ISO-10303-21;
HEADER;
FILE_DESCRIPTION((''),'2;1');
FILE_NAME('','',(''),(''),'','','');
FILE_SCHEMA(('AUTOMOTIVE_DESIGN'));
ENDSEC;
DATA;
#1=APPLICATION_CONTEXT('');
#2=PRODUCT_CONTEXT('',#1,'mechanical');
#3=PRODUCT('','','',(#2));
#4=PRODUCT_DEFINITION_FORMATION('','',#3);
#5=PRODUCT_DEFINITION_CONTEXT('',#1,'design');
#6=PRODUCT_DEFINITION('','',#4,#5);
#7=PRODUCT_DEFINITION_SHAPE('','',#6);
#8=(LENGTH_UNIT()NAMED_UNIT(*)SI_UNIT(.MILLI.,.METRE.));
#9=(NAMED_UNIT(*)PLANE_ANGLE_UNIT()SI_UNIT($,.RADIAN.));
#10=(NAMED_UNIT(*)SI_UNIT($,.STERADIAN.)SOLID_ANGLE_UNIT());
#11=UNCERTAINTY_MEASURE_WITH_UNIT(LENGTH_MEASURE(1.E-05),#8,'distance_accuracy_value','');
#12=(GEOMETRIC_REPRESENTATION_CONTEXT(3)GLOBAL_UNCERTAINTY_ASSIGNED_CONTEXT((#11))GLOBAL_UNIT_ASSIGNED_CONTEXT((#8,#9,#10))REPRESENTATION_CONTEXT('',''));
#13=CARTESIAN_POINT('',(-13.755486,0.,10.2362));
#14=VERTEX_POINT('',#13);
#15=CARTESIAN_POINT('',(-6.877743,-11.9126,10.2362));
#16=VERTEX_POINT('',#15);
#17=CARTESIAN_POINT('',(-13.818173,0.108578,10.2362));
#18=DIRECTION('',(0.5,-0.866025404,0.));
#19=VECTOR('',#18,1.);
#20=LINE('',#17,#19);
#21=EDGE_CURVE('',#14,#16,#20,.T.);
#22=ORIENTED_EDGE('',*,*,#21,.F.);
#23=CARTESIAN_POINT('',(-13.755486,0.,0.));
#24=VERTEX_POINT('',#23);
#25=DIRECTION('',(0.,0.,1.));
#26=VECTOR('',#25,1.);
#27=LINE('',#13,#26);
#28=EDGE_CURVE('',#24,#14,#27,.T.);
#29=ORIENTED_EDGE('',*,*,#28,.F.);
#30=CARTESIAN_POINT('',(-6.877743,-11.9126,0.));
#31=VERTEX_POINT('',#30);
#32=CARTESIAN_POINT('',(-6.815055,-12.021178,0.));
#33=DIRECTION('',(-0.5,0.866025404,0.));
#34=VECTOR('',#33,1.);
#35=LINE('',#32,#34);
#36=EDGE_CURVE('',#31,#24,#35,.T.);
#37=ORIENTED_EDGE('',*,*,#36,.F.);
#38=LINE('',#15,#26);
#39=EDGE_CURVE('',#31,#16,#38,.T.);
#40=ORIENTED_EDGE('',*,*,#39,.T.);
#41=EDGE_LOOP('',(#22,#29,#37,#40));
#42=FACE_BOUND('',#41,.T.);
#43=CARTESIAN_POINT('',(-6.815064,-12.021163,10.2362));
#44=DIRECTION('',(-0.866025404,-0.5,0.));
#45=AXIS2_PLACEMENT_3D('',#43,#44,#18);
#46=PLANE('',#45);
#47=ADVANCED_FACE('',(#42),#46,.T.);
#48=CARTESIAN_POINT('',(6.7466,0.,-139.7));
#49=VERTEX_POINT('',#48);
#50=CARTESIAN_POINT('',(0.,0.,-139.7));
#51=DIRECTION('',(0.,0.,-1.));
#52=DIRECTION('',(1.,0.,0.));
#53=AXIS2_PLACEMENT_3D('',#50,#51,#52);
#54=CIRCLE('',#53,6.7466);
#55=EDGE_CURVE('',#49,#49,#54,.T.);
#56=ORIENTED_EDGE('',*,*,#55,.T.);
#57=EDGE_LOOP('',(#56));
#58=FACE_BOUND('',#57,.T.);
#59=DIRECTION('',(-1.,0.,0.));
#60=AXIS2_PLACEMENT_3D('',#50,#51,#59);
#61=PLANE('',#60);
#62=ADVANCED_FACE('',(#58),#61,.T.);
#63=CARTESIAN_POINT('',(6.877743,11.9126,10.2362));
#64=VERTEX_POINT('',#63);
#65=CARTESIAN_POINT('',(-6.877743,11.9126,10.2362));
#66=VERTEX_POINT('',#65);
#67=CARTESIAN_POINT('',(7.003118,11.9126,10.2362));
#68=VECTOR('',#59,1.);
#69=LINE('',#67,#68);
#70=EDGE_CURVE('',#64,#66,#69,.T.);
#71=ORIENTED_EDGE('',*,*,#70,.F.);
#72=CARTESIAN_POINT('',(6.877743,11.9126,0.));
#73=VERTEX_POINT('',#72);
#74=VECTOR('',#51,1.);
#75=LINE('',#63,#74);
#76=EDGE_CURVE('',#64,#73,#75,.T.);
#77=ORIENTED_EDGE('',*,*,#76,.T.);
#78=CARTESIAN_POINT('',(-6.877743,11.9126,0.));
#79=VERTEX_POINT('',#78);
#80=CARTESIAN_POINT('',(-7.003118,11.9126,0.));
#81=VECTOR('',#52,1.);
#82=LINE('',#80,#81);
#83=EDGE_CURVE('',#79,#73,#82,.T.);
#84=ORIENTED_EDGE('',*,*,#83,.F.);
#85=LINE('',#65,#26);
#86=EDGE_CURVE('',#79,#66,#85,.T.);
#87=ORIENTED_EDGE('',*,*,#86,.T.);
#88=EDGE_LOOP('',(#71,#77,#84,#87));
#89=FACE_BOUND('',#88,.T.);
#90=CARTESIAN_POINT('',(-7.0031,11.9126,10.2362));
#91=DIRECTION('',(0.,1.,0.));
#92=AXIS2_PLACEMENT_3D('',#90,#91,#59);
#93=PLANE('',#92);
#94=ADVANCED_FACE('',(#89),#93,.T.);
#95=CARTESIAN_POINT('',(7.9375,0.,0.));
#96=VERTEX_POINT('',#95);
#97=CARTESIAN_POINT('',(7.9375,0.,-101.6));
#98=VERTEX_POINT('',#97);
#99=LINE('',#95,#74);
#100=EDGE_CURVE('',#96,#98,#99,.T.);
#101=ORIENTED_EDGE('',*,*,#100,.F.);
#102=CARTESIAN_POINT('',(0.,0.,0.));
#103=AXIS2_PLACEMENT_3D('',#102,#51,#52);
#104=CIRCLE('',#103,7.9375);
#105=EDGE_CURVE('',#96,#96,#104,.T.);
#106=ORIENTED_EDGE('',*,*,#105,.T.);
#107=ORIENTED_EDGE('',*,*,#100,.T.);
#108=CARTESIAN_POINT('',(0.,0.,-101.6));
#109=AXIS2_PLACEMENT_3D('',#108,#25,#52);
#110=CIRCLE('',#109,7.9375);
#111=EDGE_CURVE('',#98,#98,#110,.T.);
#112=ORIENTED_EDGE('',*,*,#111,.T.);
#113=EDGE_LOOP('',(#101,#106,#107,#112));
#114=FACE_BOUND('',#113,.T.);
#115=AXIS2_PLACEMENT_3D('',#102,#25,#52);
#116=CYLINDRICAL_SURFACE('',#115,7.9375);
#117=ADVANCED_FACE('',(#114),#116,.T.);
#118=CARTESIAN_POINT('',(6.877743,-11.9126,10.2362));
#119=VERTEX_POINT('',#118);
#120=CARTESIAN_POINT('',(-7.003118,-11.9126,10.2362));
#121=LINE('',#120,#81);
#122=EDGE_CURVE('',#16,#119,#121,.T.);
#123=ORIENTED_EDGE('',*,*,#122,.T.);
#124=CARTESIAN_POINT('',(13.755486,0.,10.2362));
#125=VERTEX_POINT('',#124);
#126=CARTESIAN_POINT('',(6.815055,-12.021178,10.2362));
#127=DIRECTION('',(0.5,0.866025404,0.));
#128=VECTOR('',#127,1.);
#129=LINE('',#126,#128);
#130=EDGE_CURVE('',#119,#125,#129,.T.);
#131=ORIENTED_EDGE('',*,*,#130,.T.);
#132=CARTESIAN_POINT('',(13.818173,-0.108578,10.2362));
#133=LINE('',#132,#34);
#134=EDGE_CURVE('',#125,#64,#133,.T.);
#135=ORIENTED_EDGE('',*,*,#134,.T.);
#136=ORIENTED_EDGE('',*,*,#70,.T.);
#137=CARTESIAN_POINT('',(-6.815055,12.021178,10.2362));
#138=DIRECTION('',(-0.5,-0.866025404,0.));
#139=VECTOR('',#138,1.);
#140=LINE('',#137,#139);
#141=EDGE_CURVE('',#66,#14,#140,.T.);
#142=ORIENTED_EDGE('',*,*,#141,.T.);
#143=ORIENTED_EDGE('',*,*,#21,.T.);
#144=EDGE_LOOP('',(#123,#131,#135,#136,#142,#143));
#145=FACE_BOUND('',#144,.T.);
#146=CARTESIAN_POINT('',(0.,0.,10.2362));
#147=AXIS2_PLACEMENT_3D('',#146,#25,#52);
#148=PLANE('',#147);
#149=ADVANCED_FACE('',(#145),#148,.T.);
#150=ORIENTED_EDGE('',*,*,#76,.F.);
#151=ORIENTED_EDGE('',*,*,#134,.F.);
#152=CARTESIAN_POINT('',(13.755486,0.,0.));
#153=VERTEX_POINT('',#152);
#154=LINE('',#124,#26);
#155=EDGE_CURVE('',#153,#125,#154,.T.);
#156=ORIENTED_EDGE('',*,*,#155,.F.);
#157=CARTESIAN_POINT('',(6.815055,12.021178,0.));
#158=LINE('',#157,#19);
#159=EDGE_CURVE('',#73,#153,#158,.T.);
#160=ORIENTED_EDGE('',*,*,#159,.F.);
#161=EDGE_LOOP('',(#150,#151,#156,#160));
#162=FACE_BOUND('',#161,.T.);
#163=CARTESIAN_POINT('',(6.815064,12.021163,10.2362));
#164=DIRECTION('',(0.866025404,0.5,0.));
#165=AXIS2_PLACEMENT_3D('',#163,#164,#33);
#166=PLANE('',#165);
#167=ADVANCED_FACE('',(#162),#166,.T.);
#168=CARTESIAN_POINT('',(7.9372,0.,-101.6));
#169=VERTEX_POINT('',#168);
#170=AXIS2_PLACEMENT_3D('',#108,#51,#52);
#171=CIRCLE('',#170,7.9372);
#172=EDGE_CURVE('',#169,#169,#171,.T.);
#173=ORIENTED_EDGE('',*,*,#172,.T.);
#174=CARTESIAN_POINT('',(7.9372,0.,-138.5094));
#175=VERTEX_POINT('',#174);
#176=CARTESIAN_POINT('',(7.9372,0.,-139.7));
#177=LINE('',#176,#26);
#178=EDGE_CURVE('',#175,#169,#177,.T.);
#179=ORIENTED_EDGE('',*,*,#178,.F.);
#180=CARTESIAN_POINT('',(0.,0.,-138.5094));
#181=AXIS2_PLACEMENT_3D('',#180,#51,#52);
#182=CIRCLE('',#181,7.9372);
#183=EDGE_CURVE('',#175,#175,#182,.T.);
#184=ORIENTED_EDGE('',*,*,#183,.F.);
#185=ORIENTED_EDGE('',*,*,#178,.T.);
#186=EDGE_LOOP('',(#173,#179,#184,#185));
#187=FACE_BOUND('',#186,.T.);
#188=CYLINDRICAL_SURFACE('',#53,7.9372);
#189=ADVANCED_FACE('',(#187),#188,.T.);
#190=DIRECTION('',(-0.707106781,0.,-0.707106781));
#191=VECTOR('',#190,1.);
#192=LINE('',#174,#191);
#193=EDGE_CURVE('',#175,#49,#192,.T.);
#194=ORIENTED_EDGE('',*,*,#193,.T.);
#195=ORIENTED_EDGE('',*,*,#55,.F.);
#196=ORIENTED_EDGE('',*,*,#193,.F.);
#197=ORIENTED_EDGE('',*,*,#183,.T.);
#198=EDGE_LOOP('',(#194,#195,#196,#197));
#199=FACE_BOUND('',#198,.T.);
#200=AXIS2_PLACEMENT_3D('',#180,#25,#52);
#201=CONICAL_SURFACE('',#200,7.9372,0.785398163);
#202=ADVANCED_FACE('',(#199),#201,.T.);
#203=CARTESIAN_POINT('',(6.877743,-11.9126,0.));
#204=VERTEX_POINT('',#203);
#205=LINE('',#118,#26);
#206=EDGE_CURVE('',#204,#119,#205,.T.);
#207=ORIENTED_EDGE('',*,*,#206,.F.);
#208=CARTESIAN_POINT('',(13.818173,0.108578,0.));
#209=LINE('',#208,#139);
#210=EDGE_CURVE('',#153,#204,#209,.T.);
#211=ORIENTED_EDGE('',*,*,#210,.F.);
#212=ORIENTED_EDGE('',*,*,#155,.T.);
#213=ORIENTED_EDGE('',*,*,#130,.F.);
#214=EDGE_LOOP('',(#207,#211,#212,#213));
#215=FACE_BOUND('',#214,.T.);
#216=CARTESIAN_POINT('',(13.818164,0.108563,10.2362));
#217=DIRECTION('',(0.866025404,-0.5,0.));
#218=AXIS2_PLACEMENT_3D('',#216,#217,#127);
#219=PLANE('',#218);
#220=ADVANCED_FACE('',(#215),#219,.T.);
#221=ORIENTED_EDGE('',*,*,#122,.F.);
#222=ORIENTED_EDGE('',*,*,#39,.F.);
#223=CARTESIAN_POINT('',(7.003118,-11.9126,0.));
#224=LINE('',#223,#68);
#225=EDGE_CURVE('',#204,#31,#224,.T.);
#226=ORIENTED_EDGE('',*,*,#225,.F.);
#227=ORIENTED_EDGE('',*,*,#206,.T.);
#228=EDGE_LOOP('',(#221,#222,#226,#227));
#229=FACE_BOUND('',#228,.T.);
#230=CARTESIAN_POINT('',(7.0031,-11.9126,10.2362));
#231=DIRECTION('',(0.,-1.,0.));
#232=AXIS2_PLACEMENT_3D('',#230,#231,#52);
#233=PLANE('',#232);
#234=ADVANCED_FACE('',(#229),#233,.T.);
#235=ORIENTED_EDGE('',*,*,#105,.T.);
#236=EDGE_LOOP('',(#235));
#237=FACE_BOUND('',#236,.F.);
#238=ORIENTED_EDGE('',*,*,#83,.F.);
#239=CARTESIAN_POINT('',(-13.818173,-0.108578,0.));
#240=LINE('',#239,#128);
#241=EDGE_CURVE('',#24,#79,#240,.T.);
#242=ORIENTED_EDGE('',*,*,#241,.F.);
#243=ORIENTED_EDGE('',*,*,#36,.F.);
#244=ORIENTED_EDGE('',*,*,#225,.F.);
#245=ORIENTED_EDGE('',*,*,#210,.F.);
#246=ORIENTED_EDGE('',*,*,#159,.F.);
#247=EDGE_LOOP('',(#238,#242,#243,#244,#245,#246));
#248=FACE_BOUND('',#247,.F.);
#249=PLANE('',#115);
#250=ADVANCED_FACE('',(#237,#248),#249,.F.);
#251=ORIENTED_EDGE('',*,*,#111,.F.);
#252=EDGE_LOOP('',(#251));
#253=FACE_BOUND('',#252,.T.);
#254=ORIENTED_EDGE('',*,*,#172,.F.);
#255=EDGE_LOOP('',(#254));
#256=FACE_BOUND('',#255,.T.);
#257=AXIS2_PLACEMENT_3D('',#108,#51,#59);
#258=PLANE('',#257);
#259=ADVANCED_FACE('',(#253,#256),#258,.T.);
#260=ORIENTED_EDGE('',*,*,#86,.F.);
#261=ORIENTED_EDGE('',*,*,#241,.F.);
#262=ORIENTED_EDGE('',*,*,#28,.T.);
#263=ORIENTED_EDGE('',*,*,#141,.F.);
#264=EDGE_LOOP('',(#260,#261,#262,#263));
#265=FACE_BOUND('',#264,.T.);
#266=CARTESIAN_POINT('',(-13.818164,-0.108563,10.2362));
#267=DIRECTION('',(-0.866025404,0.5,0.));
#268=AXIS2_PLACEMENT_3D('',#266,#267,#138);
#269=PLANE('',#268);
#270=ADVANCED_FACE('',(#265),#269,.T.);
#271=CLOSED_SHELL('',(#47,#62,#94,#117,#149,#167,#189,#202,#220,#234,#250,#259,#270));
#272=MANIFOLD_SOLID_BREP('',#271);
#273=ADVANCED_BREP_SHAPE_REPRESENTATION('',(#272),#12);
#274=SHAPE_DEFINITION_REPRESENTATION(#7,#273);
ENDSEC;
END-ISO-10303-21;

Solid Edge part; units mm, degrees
sketch "Sketch1" plane through (0, 0, 0) normal (0, 0, 1) x (1, 0, 0)
  circle A0 centre (0, 0) radius 13.8186
  dimension "D1" = 27.6372
extrude "Protrusion1" add sketch "Sketch1" along normal blind 10.2362
sketch "Sketch2" plane through (0, 0, 0) normal (0, 0, -1) x (1, 0, 0)
  circle A0 centre (0, 0) radius 7.9375
extrude "Protrusion2" add sketch "Sketch2" along normal blind 139.7
sketch "Sketch3" plane through (0, 0, -139.7) normal (0, 0, -1) x (1, 0, 0)
  circle A0 centre (0, 0) radius 7.9372
extrude "Cutout1" cut sketch "Sketch3" against normal blind 38.1 flip side to cut
chamfer "Chamfer_1" distance 1.1906 angle 45 1 edges at (-7.9372, 0, -139.7)
sketch "Sketch4" plane through (0, 0, 10.2362) normal (0, 0, 1) x (1, 0, 0)
  line L0 (-7.0031, 11.9126) -> (7.0031, 11.9126)
  dimension "D1" = 23.8252
extrude "Cutout2" cut sketch "Sketch4" against normal up to next material side at (0, 11.9626, 10.2362)
pattern_circular "Pattern1" count 6 over 360 about axis through (0, 0, 10.2362) along (0, 0, 1) of "Cutout2"
properties part number "24102893"
